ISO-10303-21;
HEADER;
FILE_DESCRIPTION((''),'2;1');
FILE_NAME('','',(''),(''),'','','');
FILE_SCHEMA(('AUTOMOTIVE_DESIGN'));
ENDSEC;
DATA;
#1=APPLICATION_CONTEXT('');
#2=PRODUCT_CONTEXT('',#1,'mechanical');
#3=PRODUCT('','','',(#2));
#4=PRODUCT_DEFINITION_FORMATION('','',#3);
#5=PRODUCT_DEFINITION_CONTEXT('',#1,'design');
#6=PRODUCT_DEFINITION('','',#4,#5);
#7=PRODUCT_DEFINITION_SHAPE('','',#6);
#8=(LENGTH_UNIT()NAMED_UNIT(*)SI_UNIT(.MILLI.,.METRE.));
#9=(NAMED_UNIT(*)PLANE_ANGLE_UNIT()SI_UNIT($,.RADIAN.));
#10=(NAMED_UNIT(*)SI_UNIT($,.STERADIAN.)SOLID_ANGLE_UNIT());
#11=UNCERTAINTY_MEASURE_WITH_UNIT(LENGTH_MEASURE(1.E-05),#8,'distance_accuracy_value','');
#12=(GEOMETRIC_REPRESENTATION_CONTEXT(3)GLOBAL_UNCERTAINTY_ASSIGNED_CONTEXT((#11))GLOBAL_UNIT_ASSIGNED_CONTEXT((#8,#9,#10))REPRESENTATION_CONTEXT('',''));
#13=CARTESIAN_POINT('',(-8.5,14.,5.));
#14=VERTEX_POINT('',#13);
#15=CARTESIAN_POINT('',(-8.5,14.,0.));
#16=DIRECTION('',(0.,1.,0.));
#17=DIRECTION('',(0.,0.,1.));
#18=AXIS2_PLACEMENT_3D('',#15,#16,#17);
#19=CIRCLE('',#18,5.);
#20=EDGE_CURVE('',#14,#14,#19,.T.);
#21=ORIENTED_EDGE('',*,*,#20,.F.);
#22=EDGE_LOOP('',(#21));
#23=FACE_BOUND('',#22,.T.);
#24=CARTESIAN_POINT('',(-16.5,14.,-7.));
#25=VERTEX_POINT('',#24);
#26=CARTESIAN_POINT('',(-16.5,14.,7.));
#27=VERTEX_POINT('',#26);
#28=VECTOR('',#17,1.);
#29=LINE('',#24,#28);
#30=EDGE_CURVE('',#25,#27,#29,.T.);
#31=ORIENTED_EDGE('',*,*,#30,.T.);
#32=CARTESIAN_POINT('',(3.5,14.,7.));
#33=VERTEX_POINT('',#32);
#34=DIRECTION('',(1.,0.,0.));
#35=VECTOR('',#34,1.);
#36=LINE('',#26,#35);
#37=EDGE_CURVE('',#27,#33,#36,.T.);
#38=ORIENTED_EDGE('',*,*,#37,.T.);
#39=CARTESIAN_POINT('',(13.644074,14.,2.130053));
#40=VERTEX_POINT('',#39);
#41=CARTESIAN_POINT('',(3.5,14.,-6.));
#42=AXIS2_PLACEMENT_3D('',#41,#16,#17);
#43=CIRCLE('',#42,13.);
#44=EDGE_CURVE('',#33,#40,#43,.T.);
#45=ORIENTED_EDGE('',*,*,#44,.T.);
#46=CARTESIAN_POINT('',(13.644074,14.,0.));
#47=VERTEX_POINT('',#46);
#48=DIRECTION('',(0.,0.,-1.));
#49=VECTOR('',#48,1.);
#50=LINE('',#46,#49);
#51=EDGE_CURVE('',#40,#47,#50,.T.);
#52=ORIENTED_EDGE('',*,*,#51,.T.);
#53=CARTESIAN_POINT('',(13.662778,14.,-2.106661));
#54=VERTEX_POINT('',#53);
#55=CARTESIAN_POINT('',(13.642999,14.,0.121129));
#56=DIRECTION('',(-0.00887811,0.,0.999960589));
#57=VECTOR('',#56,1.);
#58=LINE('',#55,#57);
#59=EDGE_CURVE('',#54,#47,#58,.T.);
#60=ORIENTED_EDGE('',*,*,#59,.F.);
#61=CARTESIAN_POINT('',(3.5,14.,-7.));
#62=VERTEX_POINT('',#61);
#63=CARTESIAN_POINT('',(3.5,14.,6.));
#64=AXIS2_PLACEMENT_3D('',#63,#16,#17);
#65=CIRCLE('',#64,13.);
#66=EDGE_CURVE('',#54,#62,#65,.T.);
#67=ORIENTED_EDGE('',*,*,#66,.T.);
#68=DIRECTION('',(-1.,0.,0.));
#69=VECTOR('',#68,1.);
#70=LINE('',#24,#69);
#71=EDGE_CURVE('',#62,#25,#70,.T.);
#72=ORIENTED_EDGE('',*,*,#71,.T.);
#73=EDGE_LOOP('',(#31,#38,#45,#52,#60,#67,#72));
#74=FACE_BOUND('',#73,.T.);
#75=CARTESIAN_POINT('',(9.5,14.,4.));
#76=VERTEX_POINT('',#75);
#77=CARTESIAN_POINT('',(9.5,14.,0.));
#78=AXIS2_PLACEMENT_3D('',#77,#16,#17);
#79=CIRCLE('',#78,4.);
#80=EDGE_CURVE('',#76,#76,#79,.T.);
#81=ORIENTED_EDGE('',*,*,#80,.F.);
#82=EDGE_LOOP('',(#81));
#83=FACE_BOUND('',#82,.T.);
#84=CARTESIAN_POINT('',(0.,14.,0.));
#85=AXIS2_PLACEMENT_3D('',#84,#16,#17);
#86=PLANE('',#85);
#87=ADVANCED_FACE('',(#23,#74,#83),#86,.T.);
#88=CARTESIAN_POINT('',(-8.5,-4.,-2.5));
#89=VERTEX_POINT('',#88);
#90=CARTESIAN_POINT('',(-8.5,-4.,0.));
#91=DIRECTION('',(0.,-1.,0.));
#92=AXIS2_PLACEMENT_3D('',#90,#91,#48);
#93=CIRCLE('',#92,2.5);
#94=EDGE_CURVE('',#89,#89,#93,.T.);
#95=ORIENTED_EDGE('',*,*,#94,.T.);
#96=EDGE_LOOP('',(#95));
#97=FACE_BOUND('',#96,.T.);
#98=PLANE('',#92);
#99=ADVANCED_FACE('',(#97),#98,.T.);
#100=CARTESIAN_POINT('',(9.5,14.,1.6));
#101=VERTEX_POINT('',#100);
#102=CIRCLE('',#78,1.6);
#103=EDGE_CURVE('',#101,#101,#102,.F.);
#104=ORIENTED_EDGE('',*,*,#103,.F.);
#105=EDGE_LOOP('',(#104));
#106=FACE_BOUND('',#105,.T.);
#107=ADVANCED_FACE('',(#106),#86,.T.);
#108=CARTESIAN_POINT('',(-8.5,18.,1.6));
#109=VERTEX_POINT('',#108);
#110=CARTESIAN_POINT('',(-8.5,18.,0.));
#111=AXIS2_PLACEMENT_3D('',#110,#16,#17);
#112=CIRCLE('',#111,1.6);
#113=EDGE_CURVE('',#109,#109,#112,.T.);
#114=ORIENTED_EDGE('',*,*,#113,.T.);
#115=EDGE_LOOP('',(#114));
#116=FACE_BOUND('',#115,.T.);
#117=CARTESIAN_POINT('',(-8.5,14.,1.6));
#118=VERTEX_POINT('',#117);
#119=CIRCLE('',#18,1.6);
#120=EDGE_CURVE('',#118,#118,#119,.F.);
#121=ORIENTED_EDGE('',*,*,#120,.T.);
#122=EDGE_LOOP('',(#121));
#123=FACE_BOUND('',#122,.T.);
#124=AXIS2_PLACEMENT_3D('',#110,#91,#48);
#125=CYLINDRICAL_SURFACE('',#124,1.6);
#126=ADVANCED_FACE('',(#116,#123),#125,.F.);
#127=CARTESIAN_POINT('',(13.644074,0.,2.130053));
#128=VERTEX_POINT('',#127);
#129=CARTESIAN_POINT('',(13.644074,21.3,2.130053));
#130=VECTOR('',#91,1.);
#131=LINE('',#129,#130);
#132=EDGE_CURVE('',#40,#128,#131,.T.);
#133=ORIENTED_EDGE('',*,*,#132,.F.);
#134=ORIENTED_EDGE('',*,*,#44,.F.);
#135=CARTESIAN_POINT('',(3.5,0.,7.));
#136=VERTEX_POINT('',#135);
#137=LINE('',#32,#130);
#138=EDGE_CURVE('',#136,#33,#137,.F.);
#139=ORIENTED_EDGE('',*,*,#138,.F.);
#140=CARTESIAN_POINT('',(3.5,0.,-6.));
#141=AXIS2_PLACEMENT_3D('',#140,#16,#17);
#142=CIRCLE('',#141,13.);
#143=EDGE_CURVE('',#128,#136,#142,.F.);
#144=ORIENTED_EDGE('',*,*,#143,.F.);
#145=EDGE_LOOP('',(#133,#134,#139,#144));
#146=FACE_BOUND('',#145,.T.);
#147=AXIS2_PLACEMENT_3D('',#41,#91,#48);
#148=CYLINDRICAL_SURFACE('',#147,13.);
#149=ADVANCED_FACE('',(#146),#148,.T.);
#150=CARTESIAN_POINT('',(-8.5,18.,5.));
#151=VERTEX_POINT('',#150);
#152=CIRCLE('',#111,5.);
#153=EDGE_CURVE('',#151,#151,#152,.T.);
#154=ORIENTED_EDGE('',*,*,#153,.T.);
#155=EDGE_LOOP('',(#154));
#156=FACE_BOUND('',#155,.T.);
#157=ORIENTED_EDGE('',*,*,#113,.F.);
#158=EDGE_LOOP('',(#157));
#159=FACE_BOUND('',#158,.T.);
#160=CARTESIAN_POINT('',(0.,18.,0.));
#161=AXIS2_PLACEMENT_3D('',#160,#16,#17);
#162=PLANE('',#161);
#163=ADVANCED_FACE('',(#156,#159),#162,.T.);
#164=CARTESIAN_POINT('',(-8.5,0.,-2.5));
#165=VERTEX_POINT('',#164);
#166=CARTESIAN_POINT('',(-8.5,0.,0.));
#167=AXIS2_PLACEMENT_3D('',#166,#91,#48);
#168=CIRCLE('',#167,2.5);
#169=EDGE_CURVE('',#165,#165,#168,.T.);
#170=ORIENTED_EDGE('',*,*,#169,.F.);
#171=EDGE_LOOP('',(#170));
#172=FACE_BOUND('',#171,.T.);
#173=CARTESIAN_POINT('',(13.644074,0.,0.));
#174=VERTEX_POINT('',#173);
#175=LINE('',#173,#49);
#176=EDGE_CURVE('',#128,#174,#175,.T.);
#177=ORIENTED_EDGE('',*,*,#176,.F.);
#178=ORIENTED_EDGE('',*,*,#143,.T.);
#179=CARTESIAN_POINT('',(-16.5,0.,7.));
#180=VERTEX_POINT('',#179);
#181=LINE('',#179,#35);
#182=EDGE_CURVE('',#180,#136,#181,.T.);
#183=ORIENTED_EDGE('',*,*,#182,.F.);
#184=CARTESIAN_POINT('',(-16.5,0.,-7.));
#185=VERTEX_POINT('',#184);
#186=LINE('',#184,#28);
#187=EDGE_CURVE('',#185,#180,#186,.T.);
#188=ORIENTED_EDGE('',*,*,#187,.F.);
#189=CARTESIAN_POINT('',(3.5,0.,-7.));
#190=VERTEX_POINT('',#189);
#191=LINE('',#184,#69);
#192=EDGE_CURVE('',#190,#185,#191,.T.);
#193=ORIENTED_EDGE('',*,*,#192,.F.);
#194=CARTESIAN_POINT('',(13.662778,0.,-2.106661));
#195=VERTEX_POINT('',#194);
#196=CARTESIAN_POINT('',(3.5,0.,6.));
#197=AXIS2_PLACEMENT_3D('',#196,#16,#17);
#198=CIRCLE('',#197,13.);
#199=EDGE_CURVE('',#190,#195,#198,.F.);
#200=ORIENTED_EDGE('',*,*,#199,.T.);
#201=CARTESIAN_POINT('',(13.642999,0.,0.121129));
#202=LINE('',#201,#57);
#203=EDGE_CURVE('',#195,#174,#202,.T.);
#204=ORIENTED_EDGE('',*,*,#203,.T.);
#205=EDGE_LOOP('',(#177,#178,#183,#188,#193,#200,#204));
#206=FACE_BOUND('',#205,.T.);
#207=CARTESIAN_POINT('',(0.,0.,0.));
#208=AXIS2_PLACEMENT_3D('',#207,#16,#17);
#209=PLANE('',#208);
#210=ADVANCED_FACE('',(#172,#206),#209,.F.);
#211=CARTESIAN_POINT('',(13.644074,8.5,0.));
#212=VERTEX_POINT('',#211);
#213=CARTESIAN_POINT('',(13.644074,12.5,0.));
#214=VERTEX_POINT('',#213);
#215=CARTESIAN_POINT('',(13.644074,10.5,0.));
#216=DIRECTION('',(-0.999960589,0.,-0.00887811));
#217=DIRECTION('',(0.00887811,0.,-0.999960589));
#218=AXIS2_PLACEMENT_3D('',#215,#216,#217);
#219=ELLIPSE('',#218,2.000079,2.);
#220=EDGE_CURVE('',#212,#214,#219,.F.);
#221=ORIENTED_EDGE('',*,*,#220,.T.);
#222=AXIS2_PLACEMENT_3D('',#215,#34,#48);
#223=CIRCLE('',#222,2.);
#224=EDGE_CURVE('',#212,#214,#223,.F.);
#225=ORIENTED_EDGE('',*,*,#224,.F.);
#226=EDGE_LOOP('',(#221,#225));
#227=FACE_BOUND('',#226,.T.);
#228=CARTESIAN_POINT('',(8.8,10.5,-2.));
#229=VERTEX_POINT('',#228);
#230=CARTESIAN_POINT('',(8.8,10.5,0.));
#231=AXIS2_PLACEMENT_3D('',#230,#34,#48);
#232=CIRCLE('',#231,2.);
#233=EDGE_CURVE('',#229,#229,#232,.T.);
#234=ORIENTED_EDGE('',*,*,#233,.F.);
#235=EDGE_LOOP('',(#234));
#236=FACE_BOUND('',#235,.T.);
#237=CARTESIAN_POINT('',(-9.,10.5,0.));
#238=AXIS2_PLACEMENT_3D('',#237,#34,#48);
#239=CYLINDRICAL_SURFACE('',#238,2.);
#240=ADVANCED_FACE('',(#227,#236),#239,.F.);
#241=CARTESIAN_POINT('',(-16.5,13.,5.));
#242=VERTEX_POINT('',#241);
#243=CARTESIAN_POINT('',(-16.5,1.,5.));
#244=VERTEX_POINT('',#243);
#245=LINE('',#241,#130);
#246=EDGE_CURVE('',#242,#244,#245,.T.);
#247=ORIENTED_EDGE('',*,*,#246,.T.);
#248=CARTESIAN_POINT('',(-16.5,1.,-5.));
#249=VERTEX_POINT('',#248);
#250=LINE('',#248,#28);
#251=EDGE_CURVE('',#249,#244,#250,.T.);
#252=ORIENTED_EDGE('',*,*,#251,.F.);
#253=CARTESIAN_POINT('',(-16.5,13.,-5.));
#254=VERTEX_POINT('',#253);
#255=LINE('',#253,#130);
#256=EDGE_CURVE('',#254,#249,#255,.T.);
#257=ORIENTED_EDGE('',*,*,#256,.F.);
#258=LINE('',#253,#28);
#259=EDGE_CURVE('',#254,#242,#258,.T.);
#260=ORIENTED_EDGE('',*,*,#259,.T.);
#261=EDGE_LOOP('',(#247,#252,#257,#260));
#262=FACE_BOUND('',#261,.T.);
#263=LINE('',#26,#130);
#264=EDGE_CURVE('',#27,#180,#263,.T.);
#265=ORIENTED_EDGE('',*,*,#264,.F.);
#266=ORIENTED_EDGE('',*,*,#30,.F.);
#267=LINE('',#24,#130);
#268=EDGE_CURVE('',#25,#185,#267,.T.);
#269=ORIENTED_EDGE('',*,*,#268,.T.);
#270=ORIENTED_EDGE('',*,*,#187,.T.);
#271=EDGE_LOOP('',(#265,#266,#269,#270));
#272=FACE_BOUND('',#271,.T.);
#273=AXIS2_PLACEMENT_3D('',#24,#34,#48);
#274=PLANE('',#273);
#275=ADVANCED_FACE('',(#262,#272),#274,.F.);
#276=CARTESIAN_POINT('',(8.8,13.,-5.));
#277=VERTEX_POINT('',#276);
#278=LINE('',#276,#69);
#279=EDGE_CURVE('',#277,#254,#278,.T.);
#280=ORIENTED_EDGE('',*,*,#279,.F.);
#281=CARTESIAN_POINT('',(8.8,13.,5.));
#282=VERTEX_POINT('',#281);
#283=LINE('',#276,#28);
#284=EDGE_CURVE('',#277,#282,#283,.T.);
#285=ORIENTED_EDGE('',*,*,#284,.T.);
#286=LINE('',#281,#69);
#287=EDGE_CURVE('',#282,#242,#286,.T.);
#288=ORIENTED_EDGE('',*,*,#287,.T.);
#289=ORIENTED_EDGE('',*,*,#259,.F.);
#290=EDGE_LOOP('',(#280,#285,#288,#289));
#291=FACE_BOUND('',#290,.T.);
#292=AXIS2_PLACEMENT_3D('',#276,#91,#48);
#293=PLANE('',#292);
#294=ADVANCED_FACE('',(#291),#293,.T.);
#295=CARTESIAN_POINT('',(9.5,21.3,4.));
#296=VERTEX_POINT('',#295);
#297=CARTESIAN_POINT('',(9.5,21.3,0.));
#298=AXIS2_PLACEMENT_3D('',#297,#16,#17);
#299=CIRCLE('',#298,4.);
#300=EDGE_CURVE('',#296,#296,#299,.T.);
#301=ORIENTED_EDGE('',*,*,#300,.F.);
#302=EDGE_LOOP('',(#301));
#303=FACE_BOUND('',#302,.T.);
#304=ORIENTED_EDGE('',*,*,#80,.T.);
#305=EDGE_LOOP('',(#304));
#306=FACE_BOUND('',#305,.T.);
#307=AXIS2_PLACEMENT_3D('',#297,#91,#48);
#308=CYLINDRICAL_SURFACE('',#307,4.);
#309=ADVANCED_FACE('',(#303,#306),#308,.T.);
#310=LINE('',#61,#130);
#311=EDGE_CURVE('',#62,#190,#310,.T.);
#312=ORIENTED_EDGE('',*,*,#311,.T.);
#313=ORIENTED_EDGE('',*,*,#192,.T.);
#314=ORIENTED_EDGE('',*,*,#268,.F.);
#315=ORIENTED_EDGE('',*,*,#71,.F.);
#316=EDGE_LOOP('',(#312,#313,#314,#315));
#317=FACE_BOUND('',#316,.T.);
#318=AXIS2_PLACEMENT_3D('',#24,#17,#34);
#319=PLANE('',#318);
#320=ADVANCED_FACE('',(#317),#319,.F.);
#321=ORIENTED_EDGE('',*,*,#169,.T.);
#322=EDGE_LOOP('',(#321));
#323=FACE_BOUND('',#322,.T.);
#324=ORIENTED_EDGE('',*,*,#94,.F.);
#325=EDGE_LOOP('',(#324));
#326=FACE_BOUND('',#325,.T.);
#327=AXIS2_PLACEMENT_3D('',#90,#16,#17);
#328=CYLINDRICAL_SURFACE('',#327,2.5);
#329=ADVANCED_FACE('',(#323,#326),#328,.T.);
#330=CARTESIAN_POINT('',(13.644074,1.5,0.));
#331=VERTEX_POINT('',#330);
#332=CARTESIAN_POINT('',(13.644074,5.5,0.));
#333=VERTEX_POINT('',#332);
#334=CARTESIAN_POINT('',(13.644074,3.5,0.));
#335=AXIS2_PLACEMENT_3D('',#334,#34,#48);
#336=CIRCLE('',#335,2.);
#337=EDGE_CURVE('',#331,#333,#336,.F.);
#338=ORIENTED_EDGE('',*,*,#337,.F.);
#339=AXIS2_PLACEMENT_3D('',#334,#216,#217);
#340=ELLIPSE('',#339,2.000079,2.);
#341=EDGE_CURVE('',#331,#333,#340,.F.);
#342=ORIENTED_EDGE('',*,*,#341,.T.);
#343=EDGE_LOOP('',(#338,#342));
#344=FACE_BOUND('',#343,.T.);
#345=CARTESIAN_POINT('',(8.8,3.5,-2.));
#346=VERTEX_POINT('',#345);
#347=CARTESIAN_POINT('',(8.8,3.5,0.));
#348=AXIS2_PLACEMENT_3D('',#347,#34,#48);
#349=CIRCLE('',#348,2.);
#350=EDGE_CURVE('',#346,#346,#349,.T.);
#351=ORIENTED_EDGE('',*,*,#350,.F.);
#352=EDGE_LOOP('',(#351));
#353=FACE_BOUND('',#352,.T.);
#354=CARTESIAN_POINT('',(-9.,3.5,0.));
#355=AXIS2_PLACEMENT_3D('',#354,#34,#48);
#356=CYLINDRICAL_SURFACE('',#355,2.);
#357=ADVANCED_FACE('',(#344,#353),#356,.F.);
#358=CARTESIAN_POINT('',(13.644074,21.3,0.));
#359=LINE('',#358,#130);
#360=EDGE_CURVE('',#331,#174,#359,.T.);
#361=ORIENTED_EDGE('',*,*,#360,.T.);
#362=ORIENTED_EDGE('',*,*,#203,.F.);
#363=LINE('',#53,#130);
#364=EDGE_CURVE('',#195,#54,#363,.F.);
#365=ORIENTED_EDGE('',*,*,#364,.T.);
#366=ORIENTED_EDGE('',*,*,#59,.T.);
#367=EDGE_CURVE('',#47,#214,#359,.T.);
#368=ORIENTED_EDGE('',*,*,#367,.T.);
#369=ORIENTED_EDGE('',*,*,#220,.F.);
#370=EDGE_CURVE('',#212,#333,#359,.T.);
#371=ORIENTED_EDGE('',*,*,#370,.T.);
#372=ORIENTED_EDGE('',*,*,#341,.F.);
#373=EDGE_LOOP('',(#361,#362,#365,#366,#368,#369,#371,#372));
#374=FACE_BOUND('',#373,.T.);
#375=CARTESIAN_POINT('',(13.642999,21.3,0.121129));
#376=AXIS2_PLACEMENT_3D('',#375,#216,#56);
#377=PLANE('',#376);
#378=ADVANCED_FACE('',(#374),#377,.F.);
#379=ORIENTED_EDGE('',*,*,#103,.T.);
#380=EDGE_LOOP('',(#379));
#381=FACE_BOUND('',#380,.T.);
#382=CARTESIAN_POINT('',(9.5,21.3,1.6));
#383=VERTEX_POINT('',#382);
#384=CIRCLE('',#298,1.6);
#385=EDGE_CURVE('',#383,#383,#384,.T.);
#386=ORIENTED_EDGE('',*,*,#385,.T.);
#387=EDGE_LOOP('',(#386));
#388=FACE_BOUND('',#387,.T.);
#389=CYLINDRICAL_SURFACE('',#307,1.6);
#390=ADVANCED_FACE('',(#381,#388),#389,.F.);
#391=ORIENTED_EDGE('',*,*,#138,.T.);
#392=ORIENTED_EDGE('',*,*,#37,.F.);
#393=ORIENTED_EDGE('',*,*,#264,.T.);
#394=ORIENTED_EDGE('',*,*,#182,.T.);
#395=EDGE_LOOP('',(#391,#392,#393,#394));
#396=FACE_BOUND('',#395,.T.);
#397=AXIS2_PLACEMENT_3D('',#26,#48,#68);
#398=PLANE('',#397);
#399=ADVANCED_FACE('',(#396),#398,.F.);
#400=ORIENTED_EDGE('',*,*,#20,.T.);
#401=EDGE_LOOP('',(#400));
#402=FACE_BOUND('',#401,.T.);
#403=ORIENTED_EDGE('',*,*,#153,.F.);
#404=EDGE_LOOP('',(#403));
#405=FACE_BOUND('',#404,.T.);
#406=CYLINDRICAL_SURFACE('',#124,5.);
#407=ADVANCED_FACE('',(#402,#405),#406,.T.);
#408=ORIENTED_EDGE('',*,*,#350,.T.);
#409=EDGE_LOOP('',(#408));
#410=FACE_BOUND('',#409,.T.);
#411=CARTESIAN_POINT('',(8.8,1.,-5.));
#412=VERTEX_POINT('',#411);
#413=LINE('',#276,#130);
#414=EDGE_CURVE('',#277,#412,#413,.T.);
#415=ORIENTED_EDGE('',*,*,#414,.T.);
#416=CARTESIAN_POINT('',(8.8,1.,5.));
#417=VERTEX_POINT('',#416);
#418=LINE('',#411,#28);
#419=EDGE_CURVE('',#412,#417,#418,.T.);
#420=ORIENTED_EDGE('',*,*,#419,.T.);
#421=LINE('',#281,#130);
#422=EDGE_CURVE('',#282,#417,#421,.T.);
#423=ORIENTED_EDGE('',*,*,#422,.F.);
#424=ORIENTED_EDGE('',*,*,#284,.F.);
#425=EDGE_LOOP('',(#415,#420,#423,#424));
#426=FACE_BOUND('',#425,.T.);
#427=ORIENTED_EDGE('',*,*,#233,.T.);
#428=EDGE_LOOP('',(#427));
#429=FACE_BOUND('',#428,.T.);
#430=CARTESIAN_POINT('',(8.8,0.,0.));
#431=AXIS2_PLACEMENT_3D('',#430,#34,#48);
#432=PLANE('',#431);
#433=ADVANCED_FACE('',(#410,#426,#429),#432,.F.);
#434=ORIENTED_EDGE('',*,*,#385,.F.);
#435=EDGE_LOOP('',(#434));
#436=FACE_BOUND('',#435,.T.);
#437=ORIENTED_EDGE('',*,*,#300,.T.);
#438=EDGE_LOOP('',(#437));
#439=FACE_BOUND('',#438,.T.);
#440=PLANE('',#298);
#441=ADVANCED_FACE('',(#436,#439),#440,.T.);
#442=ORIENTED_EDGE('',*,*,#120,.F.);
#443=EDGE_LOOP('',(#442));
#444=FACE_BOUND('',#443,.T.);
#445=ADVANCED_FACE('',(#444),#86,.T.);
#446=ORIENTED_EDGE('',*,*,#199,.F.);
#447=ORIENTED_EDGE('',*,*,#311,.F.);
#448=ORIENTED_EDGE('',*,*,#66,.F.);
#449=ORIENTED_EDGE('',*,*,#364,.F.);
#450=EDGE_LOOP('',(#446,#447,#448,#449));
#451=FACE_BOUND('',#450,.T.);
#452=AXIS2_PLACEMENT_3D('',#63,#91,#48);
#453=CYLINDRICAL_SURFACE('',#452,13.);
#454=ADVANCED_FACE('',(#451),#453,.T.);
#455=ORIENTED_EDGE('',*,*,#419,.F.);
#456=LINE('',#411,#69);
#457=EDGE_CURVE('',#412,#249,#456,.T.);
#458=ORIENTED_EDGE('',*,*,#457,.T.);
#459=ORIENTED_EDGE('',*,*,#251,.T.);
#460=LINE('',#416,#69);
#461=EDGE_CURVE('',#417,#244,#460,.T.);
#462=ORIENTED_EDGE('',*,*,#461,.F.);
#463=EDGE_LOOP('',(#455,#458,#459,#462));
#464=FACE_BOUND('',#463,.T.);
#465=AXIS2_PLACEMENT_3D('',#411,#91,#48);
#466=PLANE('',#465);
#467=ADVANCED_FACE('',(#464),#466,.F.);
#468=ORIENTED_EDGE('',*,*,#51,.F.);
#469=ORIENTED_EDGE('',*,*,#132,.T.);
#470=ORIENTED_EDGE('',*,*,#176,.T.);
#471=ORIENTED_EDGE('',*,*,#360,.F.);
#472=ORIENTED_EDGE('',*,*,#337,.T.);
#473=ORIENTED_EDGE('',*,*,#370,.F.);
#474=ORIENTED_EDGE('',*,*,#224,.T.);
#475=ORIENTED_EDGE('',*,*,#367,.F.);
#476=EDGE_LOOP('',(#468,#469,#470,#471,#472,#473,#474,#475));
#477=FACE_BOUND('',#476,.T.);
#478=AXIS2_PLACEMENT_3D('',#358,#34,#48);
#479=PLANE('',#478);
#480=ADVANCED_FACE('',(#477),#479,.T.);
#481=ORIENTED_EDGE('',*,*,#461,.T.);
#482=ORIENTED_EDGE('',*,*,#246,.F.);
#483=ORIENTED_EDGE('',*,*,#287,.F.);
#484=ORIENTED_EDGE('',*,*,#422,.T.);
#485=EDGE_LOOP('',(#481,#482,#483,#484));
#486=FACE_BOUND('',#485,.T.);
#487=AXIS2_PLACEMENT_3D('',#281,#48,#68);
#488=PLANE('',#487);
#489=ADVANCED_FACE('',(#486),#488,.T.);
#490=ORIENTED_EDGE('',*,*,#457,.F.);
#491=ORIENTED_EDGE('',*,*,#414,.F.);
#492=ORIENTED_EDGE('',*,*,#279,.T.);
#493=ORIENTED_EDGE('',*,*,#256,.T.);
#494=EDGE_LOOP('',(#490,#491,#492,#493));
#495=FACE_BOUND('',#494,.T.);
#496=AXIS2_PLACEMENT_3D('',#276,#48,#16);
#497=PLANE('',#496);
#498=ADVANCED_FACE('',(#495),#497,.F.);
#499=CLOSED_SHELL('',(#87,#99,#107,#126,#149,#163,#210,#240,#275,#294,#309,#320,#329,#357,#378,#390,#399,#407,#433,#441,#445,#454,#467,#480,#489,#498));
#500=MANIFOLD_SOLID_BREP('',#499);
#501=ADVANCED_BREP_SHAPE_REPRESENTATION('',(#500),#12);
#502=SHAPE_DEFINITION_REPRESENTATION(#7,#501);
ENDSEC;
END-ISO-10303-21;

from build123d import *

# Parameters (mm, degrees)
SKETCH_1_W               = 33
SKETCH_1_H               = 14
EXTRUDE_1_DEPTH          = 14
SKETCH_2_W               = 10
SKETCH_2_H               = 12
CUT_EXTRUDE_1_DEPTH      = 25.3
SKETCH_3_R               = 2
CUT_EXTRUDE_2_DEPTH      = 25.5
SKETCH_7_R               = 5
SKETCH_7_R_2             = 1.6
EXTRUDE_4_DEPTH          = 4
FILLET_4_DEPTH           = 14
SKETCH_8_R               = 4
SKETCH_8_R_2             = 1.6
EXTRUDE_5_DEPTH          = 7.3
SKETCH_10_R              = 2.5
EXTRUDE_6_DEPTH          = 4
CUT_EXTRUDE_3_DEPTH      = 26.401771619
CUT_EXTRUDE_3_DEPTH_BACK = 20


with BuildPart() as part:
    # 草图1 → 凸台-拉伸1 (new body)
    with BuildSketch(Plane(origin=(0, 0, 0), x_dir=(1, 0, 0), z_dir=(0, 1, 0))):
        Rectangle(SKETCH_1_W, SKETCH_1_H)
    extrude(amount=EXTRUDE_1_DEPTH)

    # 草图2 → 切除-拉伸1 (cut)
    with BuildSketch(Plane.ZY.offset(16.5)):
        with Locations((0, 7)):
            Rectangle(SKETCH_2_W, SKETCH_2_H)
    extrude(amount=-CUT_EXTRUDE_1_DEPTH, mode=Mode.SUBTRACT)

    # 草图3 → 切除-拉伸2 (cut)
    with BuildSketch(Plane(origin=(16.5, 0, 0), x_dir=(0, 0, -1), z_dir=(1, 0, 0))):
        with Locations((0, 10.5)):
            Circle(SKETCH_3_R)
        with Locations((0, 3.5)):
            Circle(SKETCH_3_R)
    extrude(amount=-CUT_EXTRUDE_2_DEPTH, mode=Mode.SUBTRACT)

    # 草图7 → 凸台-拉伸4 (add)
    with BuildSketch(Plane(origin=(0, 14, 0), x_dir=(1, 0, 0), z_dir=(0, 1, 0))):
        with Locations(Location((-8.5, 0, 0), (0, 0, 270))):
            Circle(SKETCH_7_R)
        with Locations(Location((-8.5, 0, 0), (0, 0, 270))):
            Circle(SKETCH_7_R_2, mode=Mode.SUBTRACT)
    extrude(amount=EXTRUDE_4_DEPTH)

    # 圆角4: read off the stored shape, not the designer's step
    # 圆角4 outline → 圆角4 (cut)
    with BuildSketch(Plane(origin=(0, 0, 0), x_dir=(1, 0, 0), z_dir=(0, 1, 0))):
        with BuildLine():
            ThreePointArc((3.5, 7), (10.245368782, 5.113055385), (15.032562595, 0))
            ThreePointArc((15.032562595, 0), (10.245368782, -5.113055385), (3.5, -7))
            Line((3.5, -7), (16.5, -7))
            Line((16.5, -7), (16.5, 7))
            Line((16.5, 7), (3.5, 7))
        make_face()
    extrude(amount=FILLET_4_DEPTH, mode=Mode.SUBTRACT)

    # 草图8 → 凸台-拉伸5 (add)
    with BuildSketch(Plane(origin=(0, 14, 0), x_dir=(1, 0, 0), z_dir=(0, 1, 0))):
        with Locations(Location((9.5, 0, 0), (0, 0, 270))):
            Circle(SKETCH_8_R)
        with Locations(Location((9.5, 0, 0), (0, 0, 270))):
            Circle(SKETCH_8_R_2, mode=Mode.SUBTRACT)
    extrude(amount=EXTRUDE_5_DEPTH)

    # 草图10 → 凸台-拉伸6 (add)
    with BuildSketch(Plane.XZ):
        with Locations(Location((-8.5, 0, 0), (0, 0, 270))):
            Circle(SKETCH_10_R)
    extrude(amount=EXTRUDE_6_DEPTH)

    # 草图11 → 切除-拉伸3 (cut, two sides: drawn at the far end of the back side and taken through both)
    with BuildSketch(Plane(origin=(0, 14, 0), x_dir=(1, 0, 0), z_dir=(0, 1, 0)).offset(-CUT_EXTRUDE_3_DEPTH_BACK)):
        with BuildLine():
            Line((13.662777944, 2.1066605), (13.644074044, 0))
            Line((13.644074044, 0), (15.032562595, 0))
            ThreePointArc((15.032562595, 0), (14.398690512, 1.086504435), (13.662777944, 2.1066605))
        make_face()
        with BuildLine():
            Line((15.032562595, 0), (13.644074044, 0))
            Line((13.644074044, 0), (13.644074044, -2.130053001))
            ThreePointArc((13.644074044, -2.130053001), (14.39051998, -1.099054484), (15.032562595, 0))
        make_face()
    extrude(amount=CUT_EXTRUDE_3_DEPTH + CUT_EXTRUDE_3_DEPTH_BACK, mode=Mode.SUBTRACT)


solid = part.part
